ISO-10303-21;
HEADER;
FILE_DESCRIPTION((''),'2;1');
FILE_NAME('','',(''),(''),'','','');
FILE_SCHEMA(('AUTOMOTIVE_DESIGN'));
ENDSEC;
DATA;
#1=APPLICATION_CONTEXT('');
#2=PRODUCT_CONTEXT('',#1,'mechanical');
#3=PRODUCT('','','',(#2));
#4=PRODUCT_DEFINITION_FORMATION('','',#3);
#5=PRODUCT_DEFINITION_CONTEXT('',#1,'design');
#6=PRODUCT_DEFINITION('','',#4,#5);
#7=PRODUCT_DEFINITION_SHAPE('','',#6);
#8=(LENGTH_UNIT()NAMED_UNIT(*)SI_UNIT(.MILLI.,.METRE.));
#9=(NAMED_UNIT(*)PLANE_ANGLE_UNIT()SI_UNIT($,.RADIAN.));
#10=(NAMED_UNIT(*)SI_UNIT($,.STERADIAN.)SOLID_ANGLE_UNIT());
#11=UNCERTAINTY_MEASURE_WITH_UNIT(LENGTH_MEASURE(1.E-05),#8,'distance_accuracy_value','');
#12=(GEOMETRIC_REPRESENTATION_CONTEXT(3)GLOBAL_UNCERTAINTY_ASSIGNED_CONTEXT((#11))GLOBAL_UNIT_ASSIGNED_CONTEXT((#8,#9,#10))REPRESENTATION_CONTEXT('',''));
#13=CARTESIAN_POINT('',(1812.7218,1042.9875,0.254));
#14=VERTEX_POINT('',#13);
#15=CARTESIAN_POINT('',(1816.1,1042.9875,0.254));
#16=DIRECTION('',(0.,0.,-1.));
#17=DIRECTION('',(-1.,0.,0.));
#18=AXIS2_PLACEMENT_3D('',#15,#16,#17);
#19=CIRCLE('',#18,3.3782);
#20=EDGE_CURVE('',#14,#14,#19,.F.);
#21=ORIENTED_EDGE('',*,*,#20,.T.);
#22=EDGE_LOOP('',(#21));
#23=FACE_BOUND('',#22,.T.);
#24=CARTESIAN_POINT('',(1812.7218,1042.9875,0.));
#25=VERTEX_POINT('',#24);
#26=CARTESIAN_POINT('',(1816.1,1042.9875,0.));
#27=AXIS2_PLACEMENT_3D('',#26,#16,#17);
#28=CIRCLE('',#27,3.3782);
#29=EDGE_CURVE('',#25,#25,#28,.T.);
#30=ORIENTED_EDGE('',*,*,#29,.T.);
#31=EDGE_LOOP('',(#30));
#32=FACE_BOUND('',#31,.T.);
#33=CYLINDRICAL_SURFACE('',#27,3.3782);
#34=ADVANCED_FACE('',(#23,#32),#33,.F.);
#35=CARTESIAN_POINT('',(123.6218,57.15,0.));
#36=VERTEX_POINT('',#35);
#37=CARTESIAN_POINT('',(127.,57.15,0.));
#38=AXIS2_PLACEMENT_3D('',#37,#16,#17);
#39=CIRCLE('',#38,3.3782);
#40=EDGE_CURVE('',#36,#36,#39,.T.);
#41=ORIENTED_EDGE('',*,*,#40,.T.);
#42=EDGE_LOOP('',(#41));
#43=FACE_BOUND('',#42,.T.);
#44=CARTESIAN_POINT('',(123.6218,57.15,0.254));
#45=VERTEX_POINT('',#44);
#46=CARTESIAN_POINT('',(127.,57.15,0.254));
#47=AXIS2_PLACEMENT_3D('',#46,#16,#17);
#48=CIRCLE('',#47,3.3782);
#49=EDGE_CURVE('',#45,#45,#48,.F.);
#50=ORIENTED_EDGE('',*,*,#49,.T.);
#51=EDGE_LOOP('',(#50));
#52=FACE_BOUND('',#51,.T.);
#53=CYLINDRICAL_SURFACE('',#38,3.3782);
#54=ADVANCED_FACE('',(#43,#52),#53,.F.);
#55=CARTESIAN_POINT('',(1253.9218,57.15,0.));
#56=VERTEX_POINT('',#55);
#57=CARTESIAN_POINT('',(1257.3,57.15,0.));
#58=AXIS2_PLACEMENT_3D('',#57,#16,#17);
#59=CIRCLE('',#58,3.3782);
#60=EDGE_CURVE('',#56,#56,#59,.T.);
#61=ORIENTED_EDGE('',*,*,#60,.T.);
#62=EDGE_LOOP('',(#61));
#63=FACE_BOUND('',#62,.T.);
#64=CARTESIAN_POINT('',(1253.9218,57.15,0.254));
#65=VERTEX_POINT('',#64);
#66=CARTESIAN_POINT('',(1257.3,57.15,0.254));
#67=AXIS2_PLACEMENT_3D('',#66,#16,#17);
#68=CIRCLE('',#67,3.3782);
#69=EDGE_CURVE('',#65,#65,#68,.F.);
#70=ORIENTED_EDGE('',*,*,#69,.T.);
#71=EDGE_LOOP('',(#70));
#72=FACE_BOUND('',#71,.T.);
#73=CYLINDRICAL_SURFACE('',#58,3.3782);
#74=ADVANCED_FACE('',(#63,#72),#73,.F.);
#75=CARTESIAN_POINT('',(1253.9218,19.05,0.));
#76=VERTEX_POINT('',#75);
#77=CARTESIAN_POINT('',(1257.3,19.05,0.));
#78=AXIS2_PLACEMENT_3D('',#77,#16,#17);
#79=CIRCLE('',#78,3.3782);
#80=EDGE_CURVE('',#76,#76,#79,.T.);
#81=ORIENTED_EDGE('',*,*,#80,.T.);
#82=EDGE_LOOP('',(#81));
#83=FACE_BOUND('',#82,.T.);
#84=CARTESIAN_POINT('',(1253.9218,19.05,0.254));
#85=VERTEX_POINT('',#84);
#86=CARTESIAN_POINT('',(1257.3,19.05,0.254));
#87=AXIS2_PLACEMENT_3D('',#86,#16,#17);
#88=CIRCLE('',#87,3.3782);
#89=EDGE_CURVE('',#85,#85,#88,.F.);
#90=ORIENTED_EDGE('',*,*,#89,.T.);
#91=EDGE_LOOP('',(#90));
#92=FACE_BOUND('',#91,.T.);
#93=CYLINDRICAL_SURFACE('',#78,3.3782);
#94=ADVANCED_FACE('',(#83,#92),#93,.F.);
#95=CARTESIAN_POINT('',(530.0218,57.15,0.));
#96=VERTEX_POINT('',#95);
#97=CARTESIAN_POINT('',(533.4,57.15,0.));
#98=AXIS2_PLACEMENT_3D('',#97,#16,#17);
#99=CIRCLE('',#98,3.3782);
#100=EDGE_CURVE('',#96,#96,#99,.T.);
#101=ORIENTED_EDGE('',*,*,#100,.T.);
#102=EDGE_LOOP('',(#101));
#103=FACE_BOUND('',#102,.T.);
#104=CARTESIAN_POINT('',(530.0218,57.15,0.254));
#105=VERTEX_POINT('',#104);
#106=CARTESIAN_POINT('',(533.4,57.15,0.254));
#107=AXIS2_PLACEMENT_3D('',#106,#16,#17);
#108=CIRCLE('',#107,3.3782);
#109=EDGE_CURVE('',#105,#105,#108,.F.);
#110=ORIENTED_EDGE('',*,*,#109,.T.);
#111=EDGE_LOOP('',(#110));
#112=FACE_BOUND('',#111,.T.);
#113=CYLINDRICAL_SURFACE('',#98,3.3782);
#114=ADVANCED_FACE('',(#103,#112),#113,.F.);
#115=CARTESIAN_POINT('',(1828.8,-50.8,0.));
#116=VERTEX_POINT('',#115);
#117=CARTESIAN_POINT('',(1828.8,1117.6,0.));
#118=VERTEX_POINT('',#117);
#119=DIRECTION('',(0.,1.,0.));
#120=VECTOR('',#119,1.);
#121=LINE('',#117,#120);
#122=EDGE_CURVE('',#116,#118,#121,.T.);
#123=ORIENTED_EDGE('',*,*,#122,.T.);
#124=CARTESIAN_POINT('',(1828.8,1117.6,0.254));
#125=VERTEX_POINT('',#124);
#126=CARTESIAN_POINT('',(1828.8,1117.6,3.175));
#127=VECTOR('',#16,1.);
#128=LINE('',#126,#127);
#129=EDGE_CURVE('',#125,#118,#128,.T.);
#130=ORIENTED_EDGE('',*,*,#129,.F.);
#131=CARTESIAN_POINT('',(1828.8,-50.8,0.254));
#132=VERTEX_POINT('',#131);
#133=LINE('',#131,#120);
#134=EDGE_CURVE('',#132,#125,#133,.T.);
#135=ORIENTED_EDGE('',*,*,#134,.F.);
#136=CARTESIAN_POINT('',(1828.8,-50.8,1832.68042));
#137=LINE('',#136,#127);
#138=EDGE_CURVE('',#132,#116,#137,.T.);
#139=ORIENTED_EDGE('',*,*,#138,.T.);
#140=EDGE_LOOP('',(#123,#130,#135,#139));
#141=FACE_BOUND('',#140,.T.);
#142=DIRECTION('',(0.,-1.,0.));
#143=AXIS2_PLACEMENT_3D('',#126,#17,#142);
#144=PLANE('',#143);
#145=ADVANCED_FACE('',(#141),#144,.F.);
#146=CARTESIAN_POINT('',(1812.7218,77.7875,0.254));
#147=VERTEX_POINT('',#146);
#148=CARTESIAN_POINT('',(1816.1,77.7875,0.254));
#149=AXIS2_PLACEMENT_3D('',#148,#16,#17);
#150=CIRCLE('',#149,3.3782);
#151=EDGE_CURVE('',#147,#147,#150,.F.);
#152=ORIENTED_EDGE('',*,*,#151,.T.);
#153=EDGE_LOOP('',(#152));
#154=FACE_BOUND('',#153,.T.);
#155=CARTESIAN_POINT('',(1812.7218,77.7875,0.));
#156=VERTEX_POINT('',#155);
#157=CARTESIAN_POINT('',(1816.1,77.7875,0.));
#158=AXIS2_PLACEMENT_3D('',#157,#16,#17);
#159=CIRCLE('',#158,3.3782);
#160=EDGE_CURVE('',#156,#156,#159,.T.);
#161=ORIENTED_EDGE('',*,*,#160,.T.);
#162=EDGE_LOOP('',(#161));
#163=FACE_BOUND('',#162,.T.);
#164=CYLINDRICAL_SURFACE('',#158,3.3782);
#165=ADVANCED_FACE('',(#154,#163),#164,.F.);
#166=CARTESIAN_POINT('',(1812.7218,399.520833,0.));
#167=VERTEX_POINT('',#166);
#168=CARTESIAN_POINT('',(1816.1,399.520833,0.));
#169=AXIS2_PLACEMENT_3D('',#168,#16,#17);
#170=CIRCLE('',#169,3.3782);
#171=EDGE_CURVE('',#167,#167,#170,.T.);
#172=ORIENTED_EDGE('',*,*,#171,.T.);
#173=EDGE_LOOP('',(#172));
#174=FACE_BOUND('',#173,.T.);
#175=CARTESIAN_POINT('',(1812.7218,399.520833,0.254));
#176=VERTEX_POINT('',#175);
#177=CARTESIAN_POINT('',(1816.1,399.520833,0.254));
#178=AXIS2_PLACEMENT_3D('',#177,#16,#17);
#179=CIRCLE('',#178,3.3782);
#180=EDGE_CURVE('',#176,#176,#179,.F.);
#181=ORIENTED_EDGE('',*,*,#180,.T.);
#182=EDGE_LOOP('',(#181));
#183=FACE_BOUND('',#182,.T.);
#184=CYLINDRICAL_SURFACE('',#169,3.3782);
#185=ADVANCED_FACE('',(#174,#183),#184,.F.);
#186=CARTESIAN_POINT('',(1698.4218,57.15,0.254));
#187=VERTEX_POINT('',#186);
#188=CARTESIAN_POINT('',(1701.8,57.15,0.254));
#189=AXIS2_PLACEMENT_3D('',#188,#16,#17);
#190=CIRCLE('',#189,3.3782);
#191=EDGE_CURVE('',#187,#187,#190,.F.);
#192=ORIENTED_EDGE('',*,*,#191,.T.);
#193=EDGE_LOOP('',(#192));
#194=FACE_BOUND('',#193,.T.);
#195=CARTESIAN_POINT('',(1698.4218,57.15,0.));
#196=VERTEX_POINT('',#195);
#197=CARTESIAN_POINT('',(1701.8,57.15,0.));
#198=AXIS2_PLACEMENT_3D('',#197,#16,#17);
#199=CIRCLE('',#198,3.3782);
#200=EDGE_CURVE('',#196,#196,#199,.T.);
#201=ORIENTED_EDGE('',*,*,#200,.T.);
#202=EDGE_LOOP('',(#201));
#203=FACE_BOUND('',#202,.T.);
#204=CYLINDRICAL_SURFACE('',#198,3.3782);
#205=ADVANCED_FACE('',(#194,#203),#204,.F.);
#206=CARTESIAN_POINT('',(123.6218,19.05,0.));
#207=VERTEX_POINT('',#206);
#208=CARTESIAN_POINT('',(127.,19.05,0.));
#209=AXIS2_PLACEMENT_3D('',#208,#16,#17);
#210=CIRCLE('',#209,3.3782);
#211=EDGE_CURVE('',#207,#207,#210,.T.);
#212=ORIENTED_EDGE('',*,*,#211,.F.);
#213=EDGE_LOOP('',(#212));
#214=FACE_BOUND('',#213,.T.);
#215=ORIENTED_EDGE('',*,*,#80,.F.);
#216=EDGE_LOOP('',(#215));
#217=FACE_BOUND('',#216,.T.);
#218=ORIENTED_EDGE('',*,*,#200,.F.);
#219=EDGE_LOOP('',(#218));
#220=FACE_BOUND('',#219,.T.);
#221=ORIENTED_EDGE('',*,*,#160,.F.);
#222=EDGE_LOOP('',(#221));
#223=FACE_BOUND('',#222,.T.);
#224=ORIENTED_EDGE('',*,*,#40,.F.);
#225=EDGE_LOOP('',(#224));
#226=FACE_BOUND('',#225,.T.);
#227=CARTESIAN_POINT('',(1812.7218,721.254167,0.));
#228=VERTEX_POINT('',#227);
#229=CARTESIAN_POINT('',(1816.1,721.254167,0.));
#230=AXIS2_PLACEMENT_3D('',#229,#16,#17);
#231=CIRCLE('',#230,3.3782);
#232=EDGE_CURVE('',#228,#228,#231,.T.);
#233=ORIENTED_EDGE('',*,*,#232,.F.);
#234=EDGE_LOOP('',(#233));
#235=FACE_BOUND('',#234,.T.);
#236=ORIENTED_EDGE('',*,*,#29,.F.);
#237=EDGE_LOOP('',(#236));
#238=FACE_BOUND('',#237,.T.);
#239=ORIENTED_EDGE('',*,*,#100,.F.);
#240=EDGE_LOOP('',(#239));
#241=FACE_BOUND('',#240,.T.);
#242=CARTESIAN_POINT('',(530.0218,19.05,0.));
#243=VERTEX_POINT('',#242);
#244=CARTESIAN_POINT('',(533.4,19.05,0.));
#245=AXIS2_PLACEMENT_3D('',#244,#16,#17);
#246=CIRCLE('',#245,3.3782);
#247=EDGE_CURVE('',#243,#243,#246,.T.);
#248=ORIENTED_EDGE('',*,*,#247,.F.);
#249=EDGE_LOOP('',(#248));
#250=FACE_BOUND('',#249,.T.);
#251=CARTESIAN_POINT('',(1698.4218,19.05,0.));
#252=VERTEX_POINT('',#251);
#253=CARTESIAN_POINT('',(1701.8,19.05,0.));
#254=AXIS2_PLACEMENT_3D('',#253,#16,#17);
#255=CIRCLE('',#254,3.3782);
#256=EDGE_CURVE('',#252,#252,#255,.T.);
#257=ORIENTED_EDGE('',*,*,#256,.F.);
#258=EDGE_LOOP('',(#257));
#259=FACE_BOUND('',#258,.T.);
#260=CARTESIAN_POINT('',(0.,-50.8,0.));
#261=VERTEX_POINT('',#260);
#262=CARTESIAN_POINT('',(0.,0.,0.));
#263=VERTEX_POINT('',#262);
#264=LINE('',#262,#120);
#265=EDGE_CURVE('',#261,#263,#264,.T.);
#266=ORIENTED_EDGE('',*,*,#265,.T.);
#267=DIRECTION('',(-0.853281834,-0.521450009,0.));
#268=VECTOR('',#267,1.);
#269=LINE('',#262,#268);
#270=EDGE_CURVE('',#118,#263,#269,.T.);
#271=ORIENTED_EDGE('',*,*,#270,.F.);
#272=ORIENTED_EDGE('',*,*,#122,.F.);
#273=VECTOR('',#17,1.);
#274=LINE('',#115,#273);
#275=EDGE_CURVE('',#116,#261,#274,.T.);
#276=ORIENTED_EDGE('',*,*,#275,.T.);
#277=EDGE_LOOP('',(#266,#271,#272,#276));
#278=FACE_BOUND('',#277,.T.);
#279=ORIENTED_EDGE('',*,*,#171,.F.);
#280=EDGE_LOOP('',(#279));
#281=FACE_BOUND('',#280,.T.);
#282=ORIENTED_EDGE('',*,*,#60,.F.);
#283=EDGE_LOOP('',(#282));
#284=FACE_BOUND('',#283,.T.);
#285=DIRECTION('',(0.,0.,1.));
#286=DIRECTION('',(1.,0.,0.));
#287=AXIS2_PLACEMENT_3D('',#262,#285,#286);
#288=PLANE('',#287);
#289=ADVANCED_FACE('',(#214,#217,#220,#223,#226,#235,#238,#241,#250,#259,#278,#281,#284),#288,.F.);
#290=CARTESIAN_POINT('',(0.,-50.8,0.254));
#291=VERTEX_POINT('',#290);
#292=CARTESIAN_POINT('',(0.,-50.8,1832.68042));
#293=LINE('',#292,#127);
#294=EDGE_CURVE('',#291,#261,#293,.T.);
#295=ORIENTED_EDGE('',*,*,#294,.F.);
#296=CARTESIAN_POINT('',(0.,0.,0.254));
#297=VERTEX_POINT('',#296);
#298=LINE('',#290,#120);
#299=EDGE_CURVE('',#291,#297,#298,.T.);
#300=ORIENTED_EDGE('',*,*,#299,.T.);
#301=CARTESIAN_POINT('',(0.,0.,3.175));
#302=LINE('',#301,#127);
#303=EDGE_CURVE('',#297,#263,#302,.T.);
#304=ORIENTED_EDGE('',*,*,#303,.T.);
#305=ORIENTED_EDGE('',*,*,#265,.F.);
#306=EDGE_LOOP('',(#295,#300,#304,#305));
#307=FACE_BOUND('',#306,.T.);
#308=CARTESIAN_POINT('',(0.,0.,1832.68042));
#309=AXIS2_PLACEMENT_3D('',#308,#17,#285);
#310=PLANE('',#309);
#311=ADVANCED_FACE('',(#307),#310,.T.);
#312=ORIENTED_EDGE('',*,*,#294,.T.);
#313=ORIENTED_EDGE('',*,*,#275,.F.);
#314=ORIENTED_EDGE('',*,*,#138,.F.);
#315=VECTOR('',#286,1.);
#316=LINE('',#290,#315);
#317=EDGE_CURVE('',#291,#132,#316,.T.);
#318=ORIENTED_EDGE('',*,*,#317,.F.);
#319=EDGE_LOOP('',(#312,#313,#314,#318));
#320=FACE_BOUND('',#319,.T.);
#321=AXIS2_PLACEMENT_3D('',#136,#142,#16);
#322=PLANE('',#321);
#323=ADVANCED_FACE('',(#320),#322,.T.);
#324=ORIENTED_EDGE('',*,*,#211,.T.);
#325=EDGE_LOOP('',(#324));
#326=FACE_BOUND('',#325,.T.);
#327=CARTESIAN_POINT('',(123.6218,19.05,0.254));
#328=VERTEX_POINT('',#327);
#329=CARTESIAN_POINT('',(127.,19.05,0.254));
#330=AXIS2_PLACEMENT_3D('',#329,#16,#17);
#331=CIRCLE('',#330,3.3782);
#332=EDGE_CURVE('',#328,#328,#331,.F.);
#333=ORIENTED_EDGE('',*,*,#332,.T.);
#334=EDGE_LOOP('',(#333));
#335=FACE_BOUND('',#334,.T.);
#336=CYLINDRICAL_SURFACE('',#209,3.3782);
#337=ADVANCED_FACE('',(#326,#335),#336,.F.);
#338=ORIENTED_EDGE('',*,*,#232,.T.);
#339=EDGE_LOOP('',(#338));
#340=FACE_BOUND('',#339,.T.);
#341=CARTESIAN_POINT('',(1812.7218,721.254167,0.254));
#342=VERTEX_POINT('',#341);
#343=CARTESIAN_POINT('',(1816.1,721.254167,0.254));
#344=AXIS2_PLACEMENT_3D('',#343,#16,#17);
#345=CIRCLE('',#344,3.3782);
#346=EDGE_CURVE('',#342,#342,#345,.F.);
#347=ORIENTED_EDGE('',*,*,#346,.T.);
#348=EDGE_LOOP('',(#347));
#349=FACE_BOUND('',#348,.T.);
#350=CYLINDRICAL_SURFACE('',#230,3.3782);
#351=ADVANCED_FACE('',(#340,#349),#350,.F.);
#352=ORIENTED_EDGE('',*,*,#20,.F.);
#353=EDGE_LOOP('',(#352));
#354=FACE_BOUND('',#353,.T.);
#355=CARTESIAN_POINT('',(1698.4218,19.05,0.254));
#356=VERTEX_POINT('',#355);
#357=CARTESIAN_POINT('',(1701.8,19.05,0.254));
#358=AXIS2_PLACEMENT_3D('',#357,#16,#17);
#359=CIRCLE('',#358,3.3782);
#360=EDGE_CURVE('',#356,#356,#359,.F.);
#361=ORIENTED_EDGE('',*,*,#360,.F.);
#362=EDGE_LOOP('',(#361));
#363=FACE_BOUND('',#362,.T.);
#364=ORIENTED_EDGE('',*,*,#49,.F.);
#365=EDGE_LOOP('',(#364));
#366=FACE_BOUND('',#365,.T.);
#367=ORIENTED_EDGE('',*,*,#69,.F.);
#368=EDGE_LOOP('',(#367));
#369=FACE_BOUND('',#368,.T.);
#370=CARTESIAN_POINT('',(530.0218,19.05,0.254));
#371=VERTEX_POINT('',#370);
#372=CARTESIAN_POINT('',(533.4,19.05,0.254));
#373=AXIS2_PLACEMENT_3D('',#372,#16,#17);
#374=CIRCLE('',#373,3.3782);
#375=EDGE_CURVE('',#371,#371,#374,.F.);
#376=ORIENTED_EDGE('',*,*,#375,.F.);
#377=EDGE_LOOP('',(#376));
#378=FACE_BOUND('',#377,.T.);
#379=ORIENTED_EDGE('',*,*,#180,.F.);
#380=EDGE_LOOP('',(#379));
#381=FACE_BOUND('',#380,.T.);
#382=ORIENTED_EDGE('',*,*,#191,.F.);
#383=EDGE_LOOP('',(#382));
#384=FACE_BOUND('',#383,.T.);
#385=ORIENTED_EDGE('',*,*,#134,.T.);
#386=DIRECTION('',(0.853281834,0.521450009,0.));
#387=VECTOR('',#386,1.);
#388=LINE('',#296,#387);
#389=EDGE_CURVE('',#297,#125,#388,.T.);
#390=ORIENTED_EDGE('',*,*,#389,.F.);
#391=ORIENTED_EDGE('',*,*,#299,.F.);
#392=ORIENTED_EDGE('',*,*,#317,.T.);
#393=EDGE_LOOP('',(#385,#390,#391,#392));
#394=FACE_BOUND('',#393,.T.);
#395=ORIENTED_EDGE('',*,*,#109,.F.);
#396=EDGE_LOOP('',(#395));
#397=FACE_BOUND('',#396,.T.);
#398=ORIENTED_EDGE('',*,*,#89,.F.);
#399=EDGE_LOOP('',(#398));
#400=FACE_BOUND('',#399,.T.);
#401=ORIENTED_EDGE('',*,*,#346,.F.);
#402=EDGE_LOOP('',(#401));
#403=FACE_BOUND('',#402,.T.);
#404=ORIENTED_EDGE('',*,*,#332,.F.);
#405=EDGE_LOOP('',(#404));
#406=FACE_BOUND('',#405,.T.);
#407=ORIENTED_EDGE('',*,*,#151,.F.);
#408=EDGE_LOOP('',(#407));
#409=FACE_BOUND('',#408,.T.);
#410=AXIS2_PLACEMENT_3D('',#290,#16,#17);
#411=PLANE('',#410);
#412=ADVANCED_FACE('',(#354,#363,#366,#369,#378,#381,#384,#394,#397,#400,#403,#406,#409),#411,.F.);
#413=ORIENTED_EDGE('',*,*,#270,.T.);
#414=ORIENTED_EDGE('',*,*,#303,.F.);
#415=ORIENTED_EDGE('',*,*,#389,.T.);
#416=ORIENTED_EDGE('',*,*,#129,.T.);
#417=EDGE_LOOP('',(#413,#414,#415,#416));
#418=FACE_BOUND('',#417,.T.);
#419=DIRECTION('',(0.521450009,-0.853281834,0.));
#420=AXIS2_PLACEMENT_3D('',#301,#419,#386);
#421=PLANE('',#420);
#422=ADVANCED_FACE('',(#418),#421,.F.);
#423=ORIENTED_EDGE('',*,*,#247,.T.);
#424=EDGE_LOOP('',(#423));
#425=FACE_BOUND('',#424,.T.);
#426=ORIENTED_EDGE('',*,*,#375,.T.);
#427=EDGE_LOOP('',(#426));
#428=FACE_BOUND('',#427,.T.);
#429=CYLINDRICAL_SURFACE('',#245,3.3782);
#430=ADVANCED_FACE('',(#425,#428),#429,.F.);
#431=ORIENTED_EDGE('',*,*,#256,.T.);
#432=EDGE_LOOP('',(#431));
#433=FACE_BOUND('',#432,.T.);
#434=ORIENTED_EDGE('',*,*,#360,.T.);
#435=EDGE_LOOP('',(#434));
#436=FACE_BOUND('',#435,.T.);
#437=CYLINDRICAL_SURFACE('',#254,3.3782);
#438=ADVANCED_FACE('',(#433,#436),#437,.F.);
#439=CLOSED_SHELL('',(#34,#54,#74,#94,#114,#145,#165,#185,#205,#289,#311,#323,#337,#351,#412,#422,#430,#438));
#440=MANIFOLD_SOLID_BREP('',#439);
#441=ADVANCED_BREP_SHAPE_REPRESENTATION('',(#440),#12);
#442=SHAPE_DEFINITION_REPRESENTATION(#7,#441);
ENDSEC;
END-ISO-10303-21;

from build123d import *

# Parameters (mm, degrees)
GE_20327_OUTLINE_R = 3.3782
GE_20327_DEPTH     = 3.175
SKETCH3_W          = 2.921
SKETCH3_H          = 1168.4
CUT_EXTRUDE1_DEPTH = 2144.256699657


# Read off the part's stored shape, not the designer's step: GE-20327
with BuildPart() as part:
    # GE-20327 outline → GE-20327 (new body)
    with BuildSketch(Plane.XY):
        Polygon((1828.8, -50.8), (1828.8, 1117.6), (0, 0), (0, -50.8), align=None)
        with Locations((127, 19.05)):
            Circle(GE_20327_OUTLINE_R, mode=Mode.SUBTRACT)
        with Locations((127, 57.15)):
            Circle(GE_20327_OUTLINE_R, mode=Mode.SUBTRACT)
        with Locations((533.4, 19.05)):
            Circle(GE_20327_OUTLINE_R, mode=Mode.SUBTRACT)
        with Locations((533.4, 57.15)):
            Circle(GE_20327_OUTLINE_R, mode=Mode.SUBTRACT)
        with Locations((1257.3, 19.05)):
            Circle(GE_20327_OUTLINE_R, mode=Mode.SUBTRACT)
        with Locations((1257.3, 57.15)):
            Circle(GE_20327_OUTLINE_R, mode=Mode.SUBTRACT)
        with Locations((1701.8, 19.05)):
            Circle(GE_20327_OUTLINE_R, mode=Mode.SUBTRACT)
        with Locations((1701.8, 57.15)):
            Circle(GE_20327_OUTLINE_R, mode=Mode.SUBTRACT)
        with Locations((1816.1, 77.7875)):
            Circle(GE_20327_OUTLINE_R, mode=Mode.SUBTRACT)
        with Locations((1816.1, 399.520833333)):
            Circle(GE_20327_OUTLINE_R, mode=Mode.SUBTRACT)
        with Locations((1816.1, 721.254166667)):
            Circle(GE_20327_OUTLINE_R, mode=Mode.SUBTRACT)
        with Locations((1816.1, 1042.9875)):
            Circle(GE_20327_OUTLINE_R, mode=Mode.SUBTRACT)
    extrude(amount=GE_20327_DEPTH)

    # Sketch3 → Cut-Extrude1 (cut, through all)
    with BuildSketch(Plane(origin=(1828.8, 0, 0), x_dir=(0, 0, -1), z_dir=(1, 0, 0))):
        with Locations((-1.7145, 533.4)):
            Rectangle(SKETCH3_W, SKETCH3_H)
    extrude(amount=-CUT_EXTRUDE1_DEPTH, mode=Mode.SUBTRACT)


solid = part.part
